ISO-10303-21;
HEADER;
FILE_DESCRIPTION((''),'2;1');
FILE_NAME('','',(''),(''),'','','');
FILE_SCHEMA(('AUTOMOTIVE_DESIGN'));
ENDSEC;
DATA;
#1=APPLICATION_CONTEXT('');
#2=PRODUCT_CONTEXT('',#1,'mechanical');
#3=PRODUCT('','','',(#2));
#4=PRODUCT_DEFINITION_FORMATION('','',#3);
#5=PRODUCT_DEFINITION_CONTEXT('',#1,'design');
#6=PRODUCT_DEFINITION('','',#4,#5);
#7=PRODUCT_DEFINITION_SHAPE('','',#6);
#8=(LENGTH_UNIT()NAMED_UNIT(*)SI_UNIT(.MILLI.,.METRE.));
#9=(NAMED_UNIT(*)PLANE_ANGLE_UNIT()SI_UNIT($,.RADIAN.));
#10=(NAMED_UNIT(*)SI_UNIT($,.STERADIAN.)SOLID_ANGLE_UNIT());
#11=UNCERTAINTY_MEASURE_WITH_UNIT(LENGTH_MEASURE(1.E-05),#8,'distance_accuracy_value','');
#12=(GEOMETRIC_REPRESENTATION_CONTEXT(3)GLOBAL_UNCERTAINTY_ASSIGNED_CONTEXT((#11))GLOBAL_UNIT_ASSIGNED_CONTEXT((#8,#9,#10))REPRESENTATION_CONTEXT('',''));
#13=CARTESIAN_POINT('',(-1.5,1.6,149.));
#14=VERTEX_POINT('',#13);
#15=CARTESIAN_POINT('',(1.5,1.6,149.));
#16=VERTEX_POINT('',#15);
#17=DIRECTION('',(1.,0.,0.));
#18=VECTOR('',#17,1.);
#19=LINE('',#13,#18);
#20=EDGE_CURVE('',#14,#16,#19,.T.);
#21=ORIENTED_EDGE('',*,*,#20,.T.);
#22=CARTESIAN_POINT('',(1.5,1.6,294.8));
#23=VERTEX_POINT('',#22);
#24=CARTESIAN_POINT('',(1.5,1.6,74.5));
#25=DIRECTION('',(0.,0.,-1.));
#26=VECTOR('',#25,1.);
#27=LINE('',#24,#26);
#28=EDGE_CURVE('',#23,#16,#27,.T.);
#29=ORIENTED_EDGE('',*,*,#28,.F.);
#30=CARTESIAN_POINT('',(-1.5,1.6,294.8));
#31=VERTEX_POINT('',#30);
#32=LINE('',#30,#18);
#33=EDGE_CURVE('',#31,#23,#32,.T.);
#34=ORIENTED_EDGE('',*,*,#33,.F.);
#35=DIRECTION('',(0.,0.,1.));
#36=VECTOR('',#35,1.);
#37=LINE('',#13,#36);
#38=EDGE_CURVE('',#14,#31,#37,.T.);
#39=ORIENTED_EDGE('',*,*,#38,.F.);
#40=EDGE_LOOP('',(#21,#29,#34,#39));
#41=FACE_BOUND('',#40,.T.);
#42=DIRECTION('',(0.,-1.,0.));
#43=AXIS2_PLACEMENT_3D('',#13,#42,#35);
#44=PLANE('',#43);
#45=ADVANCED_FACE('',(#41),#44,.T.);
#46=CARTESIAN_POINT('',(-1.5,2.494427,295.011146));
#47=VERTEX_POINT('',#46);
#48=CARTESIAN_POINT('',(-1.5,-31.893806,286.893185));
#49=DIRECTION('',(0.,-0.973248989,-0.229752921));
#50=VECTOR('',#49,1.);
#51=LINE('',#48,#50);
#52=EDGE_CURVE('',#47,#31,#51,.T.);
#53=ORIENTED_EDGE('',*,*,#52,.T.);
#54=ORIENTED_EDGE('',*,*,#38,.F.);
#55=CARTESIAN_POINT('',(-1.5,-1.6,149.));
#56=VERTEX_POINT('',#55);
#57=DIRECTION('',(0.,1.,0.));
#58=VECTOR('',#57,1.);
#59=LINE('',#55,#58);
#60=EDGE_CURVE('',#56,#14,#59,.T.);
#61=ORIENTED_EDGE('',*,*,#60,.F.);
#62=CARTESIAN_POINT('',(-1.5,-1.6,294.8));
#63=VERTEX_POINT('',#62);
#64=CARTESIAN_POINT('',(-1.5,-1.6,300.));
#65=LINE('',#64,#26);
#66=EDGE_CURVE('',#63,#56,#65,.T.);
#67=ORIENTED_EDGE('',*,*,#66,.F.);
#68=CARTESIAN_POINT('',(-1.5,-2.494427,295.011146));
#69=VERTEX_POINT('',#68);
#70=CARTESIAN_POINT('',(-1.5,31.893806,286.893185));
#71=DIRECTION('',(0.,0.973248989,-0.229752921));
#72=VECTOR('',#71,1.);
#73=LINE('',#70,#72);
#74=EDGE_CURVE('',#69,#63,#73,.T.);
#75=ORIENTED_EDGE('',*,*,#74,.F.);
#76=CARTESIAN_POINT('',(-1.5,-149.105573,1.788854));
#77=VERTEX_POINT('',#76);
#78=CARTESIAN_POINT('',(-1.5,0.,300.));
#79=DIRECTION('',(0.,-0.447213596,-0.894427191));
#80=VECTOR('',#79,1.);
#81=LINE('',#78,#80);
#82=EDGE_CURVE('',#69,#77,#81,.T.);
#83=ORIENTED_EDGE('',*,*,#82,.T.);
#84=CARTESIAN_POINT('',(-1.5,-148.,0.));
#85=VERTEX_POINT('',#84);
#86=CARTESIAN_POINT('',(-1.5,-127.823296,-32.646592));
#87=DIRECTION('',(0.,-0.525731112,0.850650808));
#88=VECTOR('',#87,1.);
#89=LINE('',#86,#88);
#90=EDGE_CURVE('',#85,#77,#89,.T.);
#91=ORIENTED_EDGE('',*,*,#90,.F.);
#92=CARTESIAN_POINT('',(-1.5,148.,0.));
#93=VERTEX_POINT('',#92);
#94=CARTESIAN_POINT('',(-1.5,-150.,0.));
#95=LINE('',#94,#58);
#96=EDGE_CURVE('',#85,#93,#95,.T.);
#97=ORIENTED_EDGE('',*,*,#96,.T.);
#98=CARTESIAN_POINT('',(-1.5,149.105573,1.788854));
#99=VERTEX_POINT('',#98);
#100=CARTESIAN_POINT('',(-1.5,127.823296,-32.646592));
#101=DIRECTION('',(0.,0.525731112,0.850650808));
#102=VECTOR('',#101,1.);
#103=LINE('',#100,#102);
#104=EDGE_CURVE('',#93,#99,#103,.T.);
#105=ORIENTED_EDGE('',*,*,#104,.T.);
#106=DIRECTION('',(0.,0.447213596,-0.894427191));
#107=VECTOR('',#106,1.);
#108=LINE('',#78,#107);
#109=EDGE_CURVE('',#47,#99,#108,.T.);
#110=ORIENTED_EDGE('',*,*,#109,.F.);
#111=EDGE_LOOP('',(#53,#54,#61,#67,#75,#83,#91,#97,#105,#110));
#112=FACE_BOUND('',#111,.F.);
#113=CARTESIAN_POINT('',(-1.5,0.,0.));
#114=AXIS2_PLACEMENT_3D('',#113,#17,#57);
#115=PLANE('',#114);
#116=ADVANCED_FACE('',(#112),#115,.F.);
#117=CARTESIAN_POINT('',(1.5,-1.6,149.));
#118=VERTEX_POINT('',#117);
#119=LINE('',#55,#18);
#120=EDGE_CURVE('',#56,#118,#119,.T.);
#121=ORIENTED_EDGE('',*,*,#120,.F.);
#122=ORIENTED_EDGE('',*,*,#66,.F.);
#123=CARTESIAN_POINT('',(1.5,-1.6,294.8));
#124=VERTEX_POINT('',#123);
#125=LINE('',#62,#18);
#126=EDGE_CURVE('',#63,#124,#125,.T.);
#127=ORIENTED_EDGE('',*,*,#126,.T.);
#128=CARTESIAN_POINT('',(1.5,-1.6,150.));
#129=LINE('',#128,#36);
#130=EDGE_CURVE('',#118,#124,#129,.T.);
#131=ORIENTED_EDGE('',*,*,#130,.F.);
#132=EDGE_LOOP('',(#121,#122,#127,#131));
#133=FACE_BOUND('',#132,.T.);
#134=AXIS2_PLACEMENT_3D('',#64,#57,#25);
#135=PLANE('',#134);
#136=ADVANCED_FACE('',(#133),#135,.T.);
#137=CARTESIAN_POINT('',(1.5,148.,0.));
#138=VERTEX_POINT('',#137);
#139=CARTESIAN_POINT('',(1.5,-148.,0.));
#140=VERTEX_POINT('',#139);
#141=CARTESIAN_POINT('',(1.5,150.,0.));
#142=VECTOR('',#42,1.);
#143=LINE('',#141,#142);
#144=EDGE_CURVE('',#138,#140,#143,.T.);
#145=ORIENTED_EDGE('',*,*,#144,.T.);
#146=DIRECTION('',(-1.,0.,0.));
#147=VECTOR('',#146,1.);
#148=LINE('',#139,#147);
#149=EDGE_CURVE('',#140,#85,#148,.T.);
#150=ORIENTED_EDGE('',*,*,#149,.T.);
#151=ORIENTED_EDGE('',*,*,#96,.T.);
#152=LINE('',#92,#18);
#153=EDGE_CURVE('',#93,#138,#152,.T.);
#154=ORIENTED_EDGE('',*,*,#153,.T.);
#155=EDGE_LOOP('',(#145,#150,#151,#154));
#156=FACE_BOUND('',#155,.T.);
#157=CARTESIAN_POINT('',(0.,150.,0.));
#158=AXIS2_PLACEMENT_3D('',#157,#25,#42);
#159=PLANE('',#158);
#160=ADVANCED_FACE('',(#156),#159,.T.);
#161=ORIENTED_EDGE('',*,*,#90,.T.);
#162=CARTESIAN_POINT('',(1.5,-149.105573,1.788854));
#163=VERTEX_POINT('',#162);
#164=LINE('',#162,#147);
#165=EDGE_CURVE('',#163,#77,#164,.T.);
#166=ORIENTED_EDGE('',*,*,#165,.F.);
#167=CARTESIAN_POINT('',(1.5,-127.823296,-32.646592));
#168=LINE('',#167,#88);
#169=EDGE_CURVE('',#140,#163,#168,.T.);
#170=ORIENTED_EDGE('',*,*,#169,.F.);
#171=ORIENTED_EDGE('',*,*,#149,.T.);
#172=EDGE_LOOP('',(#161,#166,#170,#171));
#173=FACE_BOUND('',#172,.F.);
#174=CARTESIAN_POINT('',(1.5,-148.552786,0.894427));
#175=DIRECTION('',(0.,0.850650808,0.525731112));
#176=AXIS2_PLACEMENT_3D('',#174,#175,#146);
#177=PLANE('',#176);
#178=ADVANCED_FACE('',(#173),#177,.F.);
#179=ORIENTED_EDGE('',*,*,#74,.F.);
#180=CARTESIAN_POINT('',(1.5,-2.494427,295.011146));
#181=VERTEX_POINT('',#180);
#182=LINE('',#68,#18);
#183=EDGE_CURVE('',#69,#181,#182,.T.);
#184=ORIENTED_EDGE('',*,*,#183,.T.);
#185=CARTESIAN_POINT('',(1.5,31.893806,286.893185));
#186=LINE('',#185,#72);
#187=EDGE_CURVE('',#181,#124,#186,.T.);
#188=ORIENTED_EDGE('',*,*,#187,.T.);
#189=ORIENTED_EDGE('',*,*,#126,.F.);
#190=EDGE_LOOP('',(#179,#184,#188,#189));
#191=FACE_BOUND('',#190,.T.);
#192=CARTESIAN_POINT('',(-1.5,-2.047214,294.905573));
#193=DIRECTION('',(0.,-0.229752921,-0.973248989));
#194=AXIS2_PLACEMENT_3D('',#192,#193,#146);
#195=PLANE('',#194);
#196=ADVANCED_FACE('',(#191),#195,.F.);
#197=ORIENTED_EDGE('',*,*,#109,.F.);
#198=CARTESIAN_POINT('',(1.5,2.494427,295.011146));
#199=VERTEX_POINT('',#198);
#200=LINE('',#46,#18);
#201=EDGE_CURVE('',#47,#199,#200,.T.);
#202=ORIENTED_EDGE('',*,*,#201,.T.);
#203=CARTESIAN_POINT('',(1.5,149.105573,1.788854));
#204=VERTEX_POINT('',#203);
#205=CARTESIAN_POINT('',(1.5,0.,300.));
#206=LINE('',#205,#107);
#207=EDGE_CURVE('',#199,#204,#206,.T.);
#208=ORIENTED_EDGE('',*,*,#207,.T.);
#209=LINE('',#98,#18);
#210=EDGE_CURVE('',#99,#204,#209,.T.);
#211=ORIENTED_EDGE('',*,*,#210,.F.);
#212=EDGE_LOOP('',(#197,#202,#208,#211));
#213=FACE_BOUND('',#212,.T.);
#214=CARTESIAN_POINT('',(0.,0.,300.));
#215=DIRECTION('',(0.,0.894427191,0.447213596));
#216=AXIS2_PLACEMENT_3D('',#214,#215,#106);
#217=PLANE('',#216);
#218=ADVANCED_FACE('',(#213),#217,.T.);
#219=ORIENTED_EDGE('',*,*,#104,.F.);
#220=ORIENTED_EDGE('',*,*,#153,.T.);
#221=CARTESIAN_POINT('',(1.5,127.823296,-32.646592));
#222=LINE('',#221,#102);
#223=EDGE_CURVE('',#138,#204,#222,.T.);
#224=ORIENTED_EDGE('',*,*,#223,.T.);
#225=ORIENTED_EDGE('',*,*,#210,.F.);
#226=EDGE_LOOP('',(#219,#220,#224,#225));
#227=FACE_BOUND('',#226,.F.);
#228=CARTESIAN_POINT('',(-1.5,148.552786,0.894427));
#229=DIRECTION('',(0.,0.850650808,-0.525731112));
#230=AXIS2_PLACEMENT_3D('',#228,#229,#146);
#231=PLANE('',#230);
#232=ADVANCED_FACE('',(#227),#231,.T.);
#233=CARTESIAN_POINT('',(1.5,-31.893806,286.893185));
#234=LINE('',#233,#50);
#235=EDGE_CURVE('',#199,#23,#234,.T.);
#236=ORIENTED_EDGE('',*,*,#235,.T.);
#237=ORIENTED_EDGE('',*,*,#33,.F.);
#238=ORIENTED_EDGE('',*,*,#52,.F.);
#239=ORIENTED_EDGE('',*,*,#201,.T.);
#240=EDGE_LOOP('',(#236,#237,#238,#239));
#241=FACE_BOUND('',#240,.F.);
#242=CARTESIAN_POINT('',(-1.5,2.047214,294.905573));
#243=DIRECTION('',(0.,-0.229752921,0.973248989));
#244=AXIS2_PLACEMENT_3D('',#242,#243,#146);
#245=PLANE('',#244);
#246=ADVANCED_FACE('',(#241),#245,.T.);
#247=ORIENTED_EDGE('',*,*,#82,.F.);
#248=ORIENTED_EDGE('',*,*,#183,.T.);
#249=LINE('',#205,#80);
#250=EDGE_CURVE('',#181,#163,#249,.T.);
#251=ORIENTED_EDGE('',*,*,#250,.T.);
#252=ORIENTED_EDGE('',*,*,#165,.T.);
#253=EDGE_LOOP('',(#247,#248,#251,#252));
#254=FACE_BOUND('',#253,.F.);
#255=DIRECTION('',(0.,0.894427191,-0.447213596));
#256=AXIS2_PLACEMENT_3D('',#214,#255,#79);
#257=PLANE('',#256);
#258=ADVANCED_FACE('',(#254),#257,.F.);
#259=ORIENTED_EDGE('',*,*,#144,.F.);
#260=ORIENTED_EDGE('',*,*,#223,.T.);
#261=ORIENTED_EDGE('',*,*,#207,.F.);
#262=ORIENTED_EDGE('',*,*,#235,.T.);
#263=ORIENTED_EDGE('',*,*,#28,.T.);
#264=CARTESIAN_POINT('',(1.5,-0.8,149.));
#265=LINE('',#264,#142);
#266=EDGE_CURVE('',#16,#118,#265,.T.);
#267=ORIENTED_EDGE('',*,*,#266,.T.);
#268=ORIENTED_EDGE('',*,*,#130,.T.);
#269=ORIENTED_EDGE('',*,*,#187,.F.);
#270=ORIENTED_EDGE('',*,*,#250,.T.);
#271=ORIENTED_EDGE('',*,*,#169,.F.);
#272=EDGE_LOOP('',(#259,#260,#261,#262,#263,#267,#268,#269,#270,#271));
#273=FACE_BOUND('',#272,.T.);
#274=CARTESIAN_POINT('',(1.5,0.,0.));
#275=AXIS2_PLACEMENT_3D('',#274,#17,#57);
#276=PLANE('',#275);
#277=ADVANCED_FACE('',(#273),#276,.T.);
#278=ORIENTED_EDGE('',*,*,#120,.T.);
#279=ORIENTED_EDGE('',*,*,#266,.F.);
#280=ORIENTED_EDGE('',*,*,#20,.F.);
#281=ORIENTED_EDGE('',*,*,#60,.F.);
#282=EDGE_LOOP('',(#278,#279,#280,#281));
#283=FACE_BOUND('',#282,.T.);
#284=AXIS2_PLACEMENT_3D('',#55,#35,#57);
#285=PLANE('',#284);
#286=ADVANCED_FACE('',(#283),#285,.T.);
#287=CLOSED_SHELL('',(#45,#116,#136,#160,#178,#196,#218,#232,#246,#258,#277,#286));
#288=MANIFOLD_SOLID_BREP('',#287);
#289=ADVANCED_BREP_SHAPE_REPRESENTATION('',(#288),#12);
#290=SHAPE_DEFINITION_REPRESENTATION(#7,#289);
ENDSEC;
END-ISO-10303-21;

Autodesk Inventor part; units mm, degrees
ref_plane "YZ Plane" through (0, 0, 0) normal (1, 0, 0) x (0, 1, 0)
ref_plane "XZ Plane" through (0, 0, 0) normal (0, 1, 0) x (-1, 0, 0)
ref_plane "XY Plane" through (0, 0, 0) normal (0, 0, 1) x (1, 0, 0)
sketch "Sketch1" plane through (0, 0, 0) normal (1, 0, 0) x (0, 1, 0)
  line L0 (150, 0) -> (-150, 0)
  line L1 (0, 0) -> (0, 300)
  line L2 (0, 300) -> (150, 0)
  line L3 (0, 300) -> (-150, 0)
  dimension "d0" = 300
  dimension "d1" = 300
extrude "Plate1" add sketch "Sketch1" along normal mid plane 3
sketch "Sketch2" plane through (-1.5, 0, 0) normal (-1, 0, 0) x (0, 0, 1)
  line L0 (300, -1.6) -> (149, -1.6)
  line L1 (149, -1.6) -> (149, 1.6)
  line L2 (149, 1.6) -> (300, 1.6)
  line L3 (300, 1.6) -> (300, -1.6)
  point P0 (0, 0)
  point P1 (300, 0)
  point P2 (300, 0)
  dimension "d3" = 3.2
  dimension "d4" = 151
extrude "Extrusion1" cut sketch "Sketch2" against normal through all
chamfer "Corner Chamfer1" distance 2 angle 45 4 edges at (0, -1.6, 296.8) (0, 1.6, 296.8) (0, 150, 0) (0, -150, 0)
equation "\"d2\" = Thickness"
equation "\"BendReliefWidth\" = Thickness"
equation "\"BendReliefDepth\" = 0.5 * Thickness"
equation "\"CornerReliefSize\" = 4 * Thickness"
equation "\"MinimumRemnant\" = 2 * Thickness"
equation "\"TransitionRadius\" = BendRadius"
equation "\"JacobiRadiusSize\" = BendRadius"
equation "\"GapSize\" = Thickness"
equation "\"Thickness\" = 3"
equation "\"BendRadius\" = 5"
properties part number "MSC 205 CONE BLADE" material "Stainless Steel"
